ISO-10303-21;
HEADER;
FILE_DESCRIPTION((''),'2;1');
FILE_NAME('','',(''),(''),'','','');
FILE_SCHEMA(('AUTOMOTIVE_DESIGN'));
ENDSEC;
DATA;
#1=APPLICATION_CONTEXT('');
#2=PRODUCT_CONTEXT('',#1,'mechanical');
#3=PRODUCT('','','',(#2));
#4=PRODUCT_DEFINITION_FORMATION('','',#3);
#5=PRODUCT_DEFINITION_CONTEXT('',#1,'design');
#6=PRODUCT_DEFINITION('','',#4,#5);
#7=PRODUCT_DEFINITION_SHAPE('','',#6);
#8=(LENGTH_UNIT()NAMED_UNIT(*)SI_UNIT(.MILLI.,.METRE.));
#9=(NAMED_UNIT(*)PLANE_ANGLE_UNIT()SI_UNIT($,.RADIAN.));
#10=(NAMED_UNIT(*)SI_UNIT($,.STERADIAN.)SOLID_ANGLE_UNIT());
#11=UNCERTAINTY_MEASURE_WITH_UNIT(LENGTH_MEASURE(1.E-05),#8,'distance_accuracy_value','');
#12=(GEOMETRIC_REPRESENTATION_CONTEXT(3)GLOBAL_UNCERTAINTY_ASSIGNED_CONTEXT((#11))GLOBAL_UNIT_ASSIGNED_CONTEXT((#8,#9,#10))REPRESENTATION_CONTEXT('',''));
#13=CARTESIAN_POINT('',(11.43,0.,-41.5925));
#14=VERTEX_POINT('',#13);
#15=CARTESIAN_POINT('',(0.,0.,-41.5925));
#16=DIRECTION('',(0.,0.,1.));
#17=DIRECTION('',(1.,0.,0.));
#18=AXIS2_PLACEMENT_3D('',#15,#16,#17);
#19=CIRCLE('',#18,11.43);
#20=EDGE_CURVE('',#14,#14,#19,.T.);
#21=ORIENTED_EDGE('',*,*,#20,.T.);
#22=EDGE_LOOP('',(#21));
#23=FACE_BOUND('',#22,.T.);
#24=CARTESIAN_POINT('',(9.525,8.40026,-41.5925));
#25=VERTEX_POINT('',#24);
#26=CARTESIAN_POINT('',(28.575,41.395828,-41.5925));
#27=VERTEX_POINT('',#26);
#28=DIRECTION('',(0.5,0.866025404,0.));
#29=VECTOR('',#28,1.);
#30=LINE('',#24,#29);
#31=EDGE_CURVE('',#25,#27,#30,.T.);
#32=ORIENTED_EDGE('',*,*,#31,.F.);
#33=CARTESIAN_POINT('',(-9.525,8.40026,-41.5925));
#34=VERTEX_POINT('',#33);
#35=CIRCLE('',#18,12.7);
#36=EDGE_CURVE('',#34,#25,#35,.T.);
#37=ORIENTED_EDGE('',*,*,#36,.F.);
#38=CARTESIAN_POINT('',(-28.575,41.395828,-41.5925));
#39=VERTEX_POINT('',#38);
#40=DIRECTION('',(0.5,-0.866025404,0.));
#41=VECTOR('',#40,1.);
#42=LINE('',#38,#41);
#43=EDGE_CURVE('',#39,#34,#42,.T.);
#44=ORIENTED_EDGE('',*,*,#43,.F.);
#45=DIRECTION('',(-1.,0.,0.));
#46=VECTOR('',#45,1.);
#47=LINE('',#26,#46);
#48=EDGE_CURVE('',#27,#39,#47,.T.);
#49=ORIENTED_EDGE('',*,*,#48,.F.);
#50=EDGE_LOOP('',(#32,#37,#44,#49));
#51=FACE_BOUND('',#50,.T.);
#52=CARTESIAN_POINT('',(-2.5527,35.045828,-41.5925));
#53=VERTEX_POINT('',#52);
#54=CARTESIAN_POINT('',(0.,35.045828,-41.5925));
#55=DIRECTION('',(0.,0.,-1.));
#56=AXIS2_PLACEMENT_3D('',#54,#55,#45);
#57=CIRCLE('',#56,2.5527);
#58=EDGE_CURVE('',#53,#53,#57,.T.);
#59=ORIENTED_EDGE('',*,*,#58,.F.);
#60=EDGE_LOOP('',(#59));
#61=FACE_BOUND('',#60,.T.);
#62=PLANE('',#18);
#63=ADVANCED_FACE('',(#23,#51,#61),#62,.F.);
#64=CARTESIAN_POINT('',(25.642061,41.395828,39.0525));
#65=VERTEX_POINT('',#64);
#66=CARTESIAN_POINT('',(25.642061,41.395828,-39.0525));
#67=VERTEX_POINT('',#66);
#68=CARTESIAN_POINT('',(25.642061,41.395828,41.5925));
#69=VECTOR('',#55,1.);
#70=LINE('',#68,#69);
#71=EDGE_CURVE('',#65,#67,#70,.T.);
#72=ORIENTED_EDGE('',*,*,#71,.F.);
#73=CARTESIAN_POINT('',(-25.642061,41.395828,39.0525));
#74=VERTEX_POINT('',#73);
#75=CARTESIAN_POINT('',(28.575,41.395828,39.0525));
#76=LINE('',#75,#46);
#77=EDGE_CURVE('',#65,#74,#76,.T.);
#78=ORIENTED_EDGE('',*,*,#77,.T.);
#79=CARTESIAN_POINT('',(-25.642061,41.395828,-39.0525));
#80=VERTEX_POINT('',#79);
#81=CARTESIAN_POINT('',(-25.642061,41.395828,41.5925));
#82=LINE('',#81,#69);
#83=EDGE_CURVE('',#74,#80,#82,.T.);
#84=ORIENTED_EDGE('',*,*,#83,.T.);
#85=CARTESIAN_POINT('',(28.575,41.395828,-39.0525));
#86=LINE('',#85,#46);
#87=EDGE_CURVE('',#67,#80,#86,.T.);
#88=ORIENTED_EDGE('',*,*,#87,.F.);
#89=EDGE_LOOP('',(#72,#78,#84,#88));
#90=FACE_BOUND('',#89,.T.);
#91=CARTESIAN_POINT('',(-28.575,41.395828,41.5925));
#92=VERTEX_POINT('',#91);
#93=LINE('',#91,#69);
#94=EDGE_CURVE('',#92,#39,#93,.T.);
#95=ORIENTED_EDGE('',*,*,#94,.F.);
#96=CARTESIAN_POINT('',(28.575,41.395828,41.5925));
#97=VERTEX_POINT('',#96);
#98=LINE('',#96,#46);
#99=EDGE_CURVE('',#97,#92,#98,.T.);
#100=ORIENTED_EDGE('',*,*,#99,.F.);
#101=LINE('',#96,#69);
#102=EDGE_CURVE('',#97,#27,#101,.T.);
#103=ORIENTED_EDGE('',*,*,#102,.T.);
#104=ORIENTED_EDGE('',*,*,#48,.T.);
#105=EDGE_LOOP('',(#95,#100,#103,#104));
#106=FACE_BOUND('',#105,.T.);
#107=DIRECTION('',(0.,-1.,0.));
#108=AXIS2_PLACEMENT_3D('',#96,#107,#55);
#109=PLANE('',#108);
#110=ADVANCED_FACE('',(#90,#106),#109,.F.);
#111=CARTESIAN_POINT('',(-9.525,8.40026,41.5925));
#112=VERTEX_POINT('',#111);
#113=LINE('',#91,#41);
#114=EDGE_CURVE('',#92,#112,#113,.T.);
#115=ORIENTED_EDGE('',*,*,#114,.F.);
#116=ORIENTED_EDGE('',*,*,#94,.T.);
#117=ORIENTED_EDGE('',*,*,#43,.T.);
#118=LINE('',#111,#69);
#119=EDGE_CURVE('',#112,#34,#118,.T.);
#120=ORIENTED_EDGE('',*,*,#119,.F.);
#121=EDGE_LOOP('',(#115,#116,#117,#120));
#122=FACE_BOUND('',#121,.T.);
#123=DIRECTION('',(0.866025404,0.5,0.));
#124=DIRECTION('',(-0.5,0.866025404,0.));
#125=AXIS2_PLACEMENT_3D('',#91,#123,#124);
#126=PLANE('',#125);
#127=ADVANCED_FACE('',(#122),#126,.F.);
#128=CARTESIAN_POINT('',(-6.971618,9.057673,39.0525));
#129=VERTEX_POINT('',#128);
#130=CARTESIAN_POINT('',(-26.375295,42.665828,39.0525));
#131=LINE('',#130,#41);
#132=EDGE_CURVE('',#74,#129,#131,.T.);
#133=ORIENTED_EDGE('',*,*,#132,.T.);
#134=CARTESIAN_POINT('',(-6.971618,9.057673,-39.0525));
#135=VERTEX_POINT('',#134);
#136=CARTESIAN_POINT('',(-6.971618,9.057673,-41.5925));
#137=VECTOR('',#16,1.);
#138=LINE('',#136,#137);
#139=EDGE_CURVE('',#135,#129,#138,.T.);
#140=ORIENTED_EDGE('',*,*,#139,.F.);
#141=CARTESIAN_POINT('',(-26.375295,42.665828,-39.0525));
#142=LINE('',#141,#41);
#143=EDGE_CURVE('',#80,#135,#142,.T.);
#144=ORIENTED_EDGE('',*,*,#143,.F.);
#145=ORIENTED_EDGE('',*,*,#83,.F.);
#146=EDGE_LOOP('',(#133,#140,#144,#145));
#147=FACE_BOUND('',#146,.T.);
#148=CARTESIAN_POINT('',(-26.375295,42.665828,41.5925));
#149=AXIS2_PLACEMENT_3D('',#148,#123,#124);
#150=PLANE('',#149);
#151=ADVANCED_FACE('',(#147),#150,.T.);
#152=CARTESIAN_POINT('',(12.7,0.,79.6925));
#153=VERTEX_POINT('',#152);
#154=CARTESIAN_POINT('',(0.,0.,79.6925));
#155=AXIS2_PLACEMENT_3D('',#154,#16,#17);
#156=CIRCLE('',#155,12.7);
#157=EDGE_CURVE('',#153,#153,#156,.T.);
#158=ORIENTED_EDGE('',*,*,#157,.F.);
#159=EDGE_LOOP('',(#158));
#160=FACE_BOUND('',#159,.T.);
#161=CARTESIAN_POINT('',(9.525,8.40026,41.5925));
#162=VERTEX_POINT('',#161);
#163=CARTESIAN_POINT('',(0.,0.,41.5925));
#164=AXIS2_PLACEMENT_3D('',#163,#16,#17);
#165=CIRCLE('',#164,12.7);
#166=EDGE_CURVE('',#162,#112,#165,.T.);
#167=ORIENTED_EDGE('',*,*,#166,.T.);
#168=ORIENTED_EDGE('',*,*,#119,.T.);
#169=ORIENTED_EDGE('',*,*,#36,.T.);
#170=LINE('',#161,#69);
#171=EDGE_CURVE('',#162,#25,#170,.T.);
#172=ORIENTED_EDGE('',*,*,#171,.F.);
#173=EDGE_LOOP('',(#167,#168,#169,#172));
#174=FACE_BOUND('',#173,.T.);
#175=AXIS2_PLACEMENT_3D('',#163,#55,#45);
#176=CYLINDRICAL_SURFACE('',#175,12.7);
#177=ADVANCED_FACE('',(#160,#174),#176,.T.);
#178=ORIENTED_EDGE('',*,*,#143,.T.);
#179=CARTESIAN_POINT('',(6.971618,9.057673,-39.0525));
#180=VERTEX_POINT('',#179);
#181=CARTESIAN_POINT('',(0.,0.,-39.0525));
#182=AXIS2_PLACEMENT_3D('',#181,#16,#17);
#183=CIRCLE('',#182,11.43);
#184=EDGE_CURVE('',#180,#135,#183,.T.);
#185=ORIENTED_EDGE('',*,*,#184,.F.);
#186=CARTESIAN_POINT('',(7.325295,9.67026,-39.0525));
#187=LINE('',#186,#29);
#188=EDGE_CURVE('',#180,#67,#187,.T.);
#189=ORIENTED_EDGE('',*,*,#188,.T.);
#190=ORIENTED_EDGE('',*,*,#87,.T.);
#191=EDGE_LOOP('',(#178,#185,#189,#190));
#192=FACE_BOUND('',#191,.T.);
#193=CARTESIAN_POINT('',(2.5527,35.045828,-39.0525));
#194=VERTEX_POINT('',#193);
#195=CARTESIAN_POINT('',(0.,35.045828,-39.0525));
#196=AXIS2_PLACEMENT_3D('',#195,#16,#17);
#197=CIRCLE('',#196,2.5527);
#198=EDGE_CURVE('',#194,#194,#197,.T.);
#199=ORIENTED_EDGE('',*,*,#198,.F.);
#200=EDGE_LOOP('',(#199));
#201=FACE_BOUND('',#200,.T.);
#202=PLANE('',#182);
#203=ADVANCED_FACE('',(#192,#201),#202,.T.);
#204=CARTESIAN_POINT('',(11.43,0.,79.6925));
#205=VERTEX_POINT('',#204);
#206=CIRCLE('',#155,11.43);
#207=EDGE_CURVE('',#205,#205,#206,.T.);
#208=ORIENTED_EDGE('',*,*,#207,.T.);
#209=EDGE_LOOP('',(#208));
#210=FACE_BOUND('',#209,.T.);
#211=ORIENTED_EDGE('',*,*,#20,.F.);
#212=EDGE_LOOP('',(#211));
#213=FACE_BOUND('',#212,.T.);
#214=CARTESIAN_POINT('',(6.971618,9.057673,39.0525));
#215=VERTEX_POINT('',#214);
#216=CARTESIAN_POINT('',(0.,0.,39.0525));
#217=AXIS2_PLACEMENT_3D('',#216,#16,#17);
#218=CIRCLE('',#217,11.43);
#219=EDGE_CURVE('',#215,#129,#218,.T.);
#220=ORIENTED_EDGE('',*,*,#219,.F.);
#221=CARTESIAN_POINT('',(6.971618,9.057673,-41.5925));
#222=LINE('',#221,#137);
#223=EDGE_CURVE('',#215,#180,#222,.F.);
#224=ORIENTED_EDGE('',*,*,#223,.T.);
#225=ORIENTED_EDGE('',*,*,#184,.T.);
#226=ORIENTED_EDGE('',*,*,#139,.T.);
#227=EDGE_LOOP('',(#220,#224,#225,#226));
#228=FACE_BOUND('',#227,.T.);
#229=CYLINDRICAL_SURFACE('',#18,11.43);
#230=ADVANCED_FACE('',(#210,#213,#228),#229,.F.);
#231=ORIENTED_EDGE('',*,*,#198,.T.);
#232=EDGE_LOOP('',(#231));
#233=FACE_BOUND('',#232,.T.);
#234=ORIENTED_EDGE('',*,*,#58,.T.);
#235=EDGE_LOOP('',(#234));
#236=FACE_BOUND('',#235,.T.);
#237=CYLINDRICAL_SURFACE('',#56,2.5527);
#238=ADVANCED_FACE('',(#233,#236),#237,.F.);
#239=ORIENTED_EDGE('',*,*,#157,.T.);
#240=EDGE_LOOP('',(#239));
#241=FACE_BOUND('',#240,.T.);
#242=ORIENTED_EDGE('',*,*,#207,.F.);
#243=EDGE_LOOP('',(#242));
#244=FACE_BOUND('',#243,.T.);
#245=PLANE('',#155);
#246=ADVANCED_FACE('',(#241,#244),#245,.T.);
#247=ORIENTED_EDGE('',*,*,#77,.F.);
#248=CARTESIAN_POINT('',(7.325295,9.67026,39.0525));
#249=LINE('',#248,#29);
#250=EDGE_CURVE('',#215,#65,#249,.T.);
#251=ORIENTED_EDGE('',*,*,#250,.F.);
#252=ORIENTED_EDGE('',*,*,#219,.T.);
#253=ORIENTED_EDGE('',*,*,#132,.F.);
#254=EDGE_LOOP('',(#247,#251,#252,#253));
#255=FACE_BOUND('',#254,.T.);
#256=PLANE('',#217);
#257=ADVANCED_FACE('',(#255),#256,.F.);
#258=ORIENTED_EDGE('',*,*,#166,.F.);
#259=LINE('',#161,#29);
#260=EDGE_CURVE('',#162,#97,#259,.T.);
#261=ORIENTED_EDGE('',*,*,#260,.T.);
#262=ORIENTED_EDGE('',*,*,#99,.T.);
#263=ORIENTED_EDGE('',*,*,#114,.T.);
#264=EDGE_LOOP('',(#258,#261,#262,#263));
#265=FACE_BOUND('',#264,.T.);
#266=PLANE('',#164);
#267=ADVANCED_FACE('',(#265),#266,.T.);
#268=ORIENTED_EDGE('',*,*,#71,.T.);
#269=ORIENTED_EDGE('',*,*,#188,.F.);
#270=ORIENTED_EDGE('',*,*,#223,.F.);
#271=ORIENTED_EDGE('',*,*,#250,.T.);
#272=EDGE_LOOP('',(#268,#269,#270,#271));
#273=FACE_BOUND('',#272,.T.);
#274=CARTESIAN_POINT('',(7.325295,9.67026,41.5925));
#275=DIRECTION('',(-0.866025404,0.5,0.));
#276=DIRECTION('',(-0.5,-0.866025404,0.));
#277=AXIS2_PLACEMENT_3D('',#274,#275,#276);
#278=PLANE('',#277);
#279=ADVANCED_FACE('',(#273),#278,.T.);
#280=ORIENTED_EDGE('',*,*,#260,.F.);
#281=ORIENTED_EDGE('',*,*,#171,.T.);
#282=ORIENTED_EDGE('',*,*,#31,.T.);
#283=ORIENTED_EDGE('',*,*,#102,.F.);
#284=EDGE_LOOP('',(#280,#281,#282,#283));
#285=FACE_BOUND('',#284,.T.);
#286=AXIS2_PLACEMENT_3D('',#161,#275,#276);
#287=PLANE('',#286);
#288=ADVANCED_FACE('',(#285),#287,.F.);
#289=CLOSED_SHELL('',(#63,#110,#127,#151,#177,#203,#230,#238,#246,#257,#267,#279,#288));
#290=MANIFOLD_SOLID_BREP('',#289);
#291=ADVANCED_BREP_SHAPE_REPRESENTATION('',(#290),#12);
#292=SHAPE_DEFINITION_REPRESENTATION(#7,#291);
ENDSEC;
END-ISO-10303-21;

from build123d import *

# Parameters (mm, degrees)
BOSS_EXTRUDE1_DEPTH         = 41.5925
SHELL1_START                = -39.0525
SHELL1_DEPTH                = 78.105
BOSS_EXTRUDE2_START         = 38.1
SKETCH3_R                   = 12.7
BOSS_EXTRUDE2_DEPTH         = 38.1
SKETCH4_R                   = 11.43
CUT_EXTRUDE1_DEPTH          = 132.301928586
F_1_4_20_TAPPED_HOLE1_D     = 5.1054
F_1_4_20_TAPPED_HOLE1_DEPTH = 2.54


# Read off the part's stored shape, not the designer's step: Shell1
with BuildPart() as part:
    # Sketch2 → Boss-Extrude1 (new, symmetric)
    with BuildSketch(Plane.XY):
        with BuildLine():
            Line((9.525, 8.400260413), (28.575, 41.395828297))
            Line((28.575, 41.395828297), (-28.575, 41.395828297))
            Line((-28.575, 41.395828297), (-9.525, 8.400260413))
            ThreePointArc((-9.525, 8.400260413), (0, -12.7), (9.525, 8.400260413))
        make_face()
    extrude(amount=BOSS_EXTRUDE1_DEPTH, both=True)

    # Shell1 outline → Shell1 (cut)
    with BuildSketch(Plane.XY.offset(SHELL1_START)):
        with BuildLine():
            ThreePointArc((-6.330300915, 7.946879282), (0, -10.16), (6.330300915, 7.946879282))
            Line((6.330300915, 7.946879282), (25.642060633, 41.395828297))
            Line((25.642060633, 41.395828297), (-25.642060633, 41.395828297))
            Line((-25.642060633, 41.395828297), (-6.330300915, 7.946879282))
        make_face()
    extrude(amount=SHELL1_DEPTH, mode=Mode.SUBTRACT)

    # Sketch3 → Boss-Extrude2 (add)
    with BuildSketch(Plane.XY.offset(41.5925).offset(BOSS_EXTRUDE2_START)):
        with Locations(Location((0, 0, 0), (0, 0, 138.590377891))):
            Circle(SKETCH3_R)
    extrude(amount=-BOSS_EXTRUDE2_DEPTH)

    # Sketch4 → Cut-Extrude1 (cut, through all)
    with BuildSketch(Plane.XY.offset(79.6925)):
        Circle(SKETCH4_R)
    extrude(amount=-CUT_EXTRUDE1_DEPTH, mode=Mode.SUBTRACT)

    # 1/4-20 Tapped Hole1
    with Locations(Plane(origin=(0, 0, -41.5925), x_dir=(1, 0, 0), z_dir=(0, 0, -1))):
        with Locations((0, -35.045828297)):
            Hole(F_1_4_20_TAPPED_HOLE1_D / 2, depth=F_1_4_20_TAPPED_HOLE1_DEPTH)


solid = part.part
